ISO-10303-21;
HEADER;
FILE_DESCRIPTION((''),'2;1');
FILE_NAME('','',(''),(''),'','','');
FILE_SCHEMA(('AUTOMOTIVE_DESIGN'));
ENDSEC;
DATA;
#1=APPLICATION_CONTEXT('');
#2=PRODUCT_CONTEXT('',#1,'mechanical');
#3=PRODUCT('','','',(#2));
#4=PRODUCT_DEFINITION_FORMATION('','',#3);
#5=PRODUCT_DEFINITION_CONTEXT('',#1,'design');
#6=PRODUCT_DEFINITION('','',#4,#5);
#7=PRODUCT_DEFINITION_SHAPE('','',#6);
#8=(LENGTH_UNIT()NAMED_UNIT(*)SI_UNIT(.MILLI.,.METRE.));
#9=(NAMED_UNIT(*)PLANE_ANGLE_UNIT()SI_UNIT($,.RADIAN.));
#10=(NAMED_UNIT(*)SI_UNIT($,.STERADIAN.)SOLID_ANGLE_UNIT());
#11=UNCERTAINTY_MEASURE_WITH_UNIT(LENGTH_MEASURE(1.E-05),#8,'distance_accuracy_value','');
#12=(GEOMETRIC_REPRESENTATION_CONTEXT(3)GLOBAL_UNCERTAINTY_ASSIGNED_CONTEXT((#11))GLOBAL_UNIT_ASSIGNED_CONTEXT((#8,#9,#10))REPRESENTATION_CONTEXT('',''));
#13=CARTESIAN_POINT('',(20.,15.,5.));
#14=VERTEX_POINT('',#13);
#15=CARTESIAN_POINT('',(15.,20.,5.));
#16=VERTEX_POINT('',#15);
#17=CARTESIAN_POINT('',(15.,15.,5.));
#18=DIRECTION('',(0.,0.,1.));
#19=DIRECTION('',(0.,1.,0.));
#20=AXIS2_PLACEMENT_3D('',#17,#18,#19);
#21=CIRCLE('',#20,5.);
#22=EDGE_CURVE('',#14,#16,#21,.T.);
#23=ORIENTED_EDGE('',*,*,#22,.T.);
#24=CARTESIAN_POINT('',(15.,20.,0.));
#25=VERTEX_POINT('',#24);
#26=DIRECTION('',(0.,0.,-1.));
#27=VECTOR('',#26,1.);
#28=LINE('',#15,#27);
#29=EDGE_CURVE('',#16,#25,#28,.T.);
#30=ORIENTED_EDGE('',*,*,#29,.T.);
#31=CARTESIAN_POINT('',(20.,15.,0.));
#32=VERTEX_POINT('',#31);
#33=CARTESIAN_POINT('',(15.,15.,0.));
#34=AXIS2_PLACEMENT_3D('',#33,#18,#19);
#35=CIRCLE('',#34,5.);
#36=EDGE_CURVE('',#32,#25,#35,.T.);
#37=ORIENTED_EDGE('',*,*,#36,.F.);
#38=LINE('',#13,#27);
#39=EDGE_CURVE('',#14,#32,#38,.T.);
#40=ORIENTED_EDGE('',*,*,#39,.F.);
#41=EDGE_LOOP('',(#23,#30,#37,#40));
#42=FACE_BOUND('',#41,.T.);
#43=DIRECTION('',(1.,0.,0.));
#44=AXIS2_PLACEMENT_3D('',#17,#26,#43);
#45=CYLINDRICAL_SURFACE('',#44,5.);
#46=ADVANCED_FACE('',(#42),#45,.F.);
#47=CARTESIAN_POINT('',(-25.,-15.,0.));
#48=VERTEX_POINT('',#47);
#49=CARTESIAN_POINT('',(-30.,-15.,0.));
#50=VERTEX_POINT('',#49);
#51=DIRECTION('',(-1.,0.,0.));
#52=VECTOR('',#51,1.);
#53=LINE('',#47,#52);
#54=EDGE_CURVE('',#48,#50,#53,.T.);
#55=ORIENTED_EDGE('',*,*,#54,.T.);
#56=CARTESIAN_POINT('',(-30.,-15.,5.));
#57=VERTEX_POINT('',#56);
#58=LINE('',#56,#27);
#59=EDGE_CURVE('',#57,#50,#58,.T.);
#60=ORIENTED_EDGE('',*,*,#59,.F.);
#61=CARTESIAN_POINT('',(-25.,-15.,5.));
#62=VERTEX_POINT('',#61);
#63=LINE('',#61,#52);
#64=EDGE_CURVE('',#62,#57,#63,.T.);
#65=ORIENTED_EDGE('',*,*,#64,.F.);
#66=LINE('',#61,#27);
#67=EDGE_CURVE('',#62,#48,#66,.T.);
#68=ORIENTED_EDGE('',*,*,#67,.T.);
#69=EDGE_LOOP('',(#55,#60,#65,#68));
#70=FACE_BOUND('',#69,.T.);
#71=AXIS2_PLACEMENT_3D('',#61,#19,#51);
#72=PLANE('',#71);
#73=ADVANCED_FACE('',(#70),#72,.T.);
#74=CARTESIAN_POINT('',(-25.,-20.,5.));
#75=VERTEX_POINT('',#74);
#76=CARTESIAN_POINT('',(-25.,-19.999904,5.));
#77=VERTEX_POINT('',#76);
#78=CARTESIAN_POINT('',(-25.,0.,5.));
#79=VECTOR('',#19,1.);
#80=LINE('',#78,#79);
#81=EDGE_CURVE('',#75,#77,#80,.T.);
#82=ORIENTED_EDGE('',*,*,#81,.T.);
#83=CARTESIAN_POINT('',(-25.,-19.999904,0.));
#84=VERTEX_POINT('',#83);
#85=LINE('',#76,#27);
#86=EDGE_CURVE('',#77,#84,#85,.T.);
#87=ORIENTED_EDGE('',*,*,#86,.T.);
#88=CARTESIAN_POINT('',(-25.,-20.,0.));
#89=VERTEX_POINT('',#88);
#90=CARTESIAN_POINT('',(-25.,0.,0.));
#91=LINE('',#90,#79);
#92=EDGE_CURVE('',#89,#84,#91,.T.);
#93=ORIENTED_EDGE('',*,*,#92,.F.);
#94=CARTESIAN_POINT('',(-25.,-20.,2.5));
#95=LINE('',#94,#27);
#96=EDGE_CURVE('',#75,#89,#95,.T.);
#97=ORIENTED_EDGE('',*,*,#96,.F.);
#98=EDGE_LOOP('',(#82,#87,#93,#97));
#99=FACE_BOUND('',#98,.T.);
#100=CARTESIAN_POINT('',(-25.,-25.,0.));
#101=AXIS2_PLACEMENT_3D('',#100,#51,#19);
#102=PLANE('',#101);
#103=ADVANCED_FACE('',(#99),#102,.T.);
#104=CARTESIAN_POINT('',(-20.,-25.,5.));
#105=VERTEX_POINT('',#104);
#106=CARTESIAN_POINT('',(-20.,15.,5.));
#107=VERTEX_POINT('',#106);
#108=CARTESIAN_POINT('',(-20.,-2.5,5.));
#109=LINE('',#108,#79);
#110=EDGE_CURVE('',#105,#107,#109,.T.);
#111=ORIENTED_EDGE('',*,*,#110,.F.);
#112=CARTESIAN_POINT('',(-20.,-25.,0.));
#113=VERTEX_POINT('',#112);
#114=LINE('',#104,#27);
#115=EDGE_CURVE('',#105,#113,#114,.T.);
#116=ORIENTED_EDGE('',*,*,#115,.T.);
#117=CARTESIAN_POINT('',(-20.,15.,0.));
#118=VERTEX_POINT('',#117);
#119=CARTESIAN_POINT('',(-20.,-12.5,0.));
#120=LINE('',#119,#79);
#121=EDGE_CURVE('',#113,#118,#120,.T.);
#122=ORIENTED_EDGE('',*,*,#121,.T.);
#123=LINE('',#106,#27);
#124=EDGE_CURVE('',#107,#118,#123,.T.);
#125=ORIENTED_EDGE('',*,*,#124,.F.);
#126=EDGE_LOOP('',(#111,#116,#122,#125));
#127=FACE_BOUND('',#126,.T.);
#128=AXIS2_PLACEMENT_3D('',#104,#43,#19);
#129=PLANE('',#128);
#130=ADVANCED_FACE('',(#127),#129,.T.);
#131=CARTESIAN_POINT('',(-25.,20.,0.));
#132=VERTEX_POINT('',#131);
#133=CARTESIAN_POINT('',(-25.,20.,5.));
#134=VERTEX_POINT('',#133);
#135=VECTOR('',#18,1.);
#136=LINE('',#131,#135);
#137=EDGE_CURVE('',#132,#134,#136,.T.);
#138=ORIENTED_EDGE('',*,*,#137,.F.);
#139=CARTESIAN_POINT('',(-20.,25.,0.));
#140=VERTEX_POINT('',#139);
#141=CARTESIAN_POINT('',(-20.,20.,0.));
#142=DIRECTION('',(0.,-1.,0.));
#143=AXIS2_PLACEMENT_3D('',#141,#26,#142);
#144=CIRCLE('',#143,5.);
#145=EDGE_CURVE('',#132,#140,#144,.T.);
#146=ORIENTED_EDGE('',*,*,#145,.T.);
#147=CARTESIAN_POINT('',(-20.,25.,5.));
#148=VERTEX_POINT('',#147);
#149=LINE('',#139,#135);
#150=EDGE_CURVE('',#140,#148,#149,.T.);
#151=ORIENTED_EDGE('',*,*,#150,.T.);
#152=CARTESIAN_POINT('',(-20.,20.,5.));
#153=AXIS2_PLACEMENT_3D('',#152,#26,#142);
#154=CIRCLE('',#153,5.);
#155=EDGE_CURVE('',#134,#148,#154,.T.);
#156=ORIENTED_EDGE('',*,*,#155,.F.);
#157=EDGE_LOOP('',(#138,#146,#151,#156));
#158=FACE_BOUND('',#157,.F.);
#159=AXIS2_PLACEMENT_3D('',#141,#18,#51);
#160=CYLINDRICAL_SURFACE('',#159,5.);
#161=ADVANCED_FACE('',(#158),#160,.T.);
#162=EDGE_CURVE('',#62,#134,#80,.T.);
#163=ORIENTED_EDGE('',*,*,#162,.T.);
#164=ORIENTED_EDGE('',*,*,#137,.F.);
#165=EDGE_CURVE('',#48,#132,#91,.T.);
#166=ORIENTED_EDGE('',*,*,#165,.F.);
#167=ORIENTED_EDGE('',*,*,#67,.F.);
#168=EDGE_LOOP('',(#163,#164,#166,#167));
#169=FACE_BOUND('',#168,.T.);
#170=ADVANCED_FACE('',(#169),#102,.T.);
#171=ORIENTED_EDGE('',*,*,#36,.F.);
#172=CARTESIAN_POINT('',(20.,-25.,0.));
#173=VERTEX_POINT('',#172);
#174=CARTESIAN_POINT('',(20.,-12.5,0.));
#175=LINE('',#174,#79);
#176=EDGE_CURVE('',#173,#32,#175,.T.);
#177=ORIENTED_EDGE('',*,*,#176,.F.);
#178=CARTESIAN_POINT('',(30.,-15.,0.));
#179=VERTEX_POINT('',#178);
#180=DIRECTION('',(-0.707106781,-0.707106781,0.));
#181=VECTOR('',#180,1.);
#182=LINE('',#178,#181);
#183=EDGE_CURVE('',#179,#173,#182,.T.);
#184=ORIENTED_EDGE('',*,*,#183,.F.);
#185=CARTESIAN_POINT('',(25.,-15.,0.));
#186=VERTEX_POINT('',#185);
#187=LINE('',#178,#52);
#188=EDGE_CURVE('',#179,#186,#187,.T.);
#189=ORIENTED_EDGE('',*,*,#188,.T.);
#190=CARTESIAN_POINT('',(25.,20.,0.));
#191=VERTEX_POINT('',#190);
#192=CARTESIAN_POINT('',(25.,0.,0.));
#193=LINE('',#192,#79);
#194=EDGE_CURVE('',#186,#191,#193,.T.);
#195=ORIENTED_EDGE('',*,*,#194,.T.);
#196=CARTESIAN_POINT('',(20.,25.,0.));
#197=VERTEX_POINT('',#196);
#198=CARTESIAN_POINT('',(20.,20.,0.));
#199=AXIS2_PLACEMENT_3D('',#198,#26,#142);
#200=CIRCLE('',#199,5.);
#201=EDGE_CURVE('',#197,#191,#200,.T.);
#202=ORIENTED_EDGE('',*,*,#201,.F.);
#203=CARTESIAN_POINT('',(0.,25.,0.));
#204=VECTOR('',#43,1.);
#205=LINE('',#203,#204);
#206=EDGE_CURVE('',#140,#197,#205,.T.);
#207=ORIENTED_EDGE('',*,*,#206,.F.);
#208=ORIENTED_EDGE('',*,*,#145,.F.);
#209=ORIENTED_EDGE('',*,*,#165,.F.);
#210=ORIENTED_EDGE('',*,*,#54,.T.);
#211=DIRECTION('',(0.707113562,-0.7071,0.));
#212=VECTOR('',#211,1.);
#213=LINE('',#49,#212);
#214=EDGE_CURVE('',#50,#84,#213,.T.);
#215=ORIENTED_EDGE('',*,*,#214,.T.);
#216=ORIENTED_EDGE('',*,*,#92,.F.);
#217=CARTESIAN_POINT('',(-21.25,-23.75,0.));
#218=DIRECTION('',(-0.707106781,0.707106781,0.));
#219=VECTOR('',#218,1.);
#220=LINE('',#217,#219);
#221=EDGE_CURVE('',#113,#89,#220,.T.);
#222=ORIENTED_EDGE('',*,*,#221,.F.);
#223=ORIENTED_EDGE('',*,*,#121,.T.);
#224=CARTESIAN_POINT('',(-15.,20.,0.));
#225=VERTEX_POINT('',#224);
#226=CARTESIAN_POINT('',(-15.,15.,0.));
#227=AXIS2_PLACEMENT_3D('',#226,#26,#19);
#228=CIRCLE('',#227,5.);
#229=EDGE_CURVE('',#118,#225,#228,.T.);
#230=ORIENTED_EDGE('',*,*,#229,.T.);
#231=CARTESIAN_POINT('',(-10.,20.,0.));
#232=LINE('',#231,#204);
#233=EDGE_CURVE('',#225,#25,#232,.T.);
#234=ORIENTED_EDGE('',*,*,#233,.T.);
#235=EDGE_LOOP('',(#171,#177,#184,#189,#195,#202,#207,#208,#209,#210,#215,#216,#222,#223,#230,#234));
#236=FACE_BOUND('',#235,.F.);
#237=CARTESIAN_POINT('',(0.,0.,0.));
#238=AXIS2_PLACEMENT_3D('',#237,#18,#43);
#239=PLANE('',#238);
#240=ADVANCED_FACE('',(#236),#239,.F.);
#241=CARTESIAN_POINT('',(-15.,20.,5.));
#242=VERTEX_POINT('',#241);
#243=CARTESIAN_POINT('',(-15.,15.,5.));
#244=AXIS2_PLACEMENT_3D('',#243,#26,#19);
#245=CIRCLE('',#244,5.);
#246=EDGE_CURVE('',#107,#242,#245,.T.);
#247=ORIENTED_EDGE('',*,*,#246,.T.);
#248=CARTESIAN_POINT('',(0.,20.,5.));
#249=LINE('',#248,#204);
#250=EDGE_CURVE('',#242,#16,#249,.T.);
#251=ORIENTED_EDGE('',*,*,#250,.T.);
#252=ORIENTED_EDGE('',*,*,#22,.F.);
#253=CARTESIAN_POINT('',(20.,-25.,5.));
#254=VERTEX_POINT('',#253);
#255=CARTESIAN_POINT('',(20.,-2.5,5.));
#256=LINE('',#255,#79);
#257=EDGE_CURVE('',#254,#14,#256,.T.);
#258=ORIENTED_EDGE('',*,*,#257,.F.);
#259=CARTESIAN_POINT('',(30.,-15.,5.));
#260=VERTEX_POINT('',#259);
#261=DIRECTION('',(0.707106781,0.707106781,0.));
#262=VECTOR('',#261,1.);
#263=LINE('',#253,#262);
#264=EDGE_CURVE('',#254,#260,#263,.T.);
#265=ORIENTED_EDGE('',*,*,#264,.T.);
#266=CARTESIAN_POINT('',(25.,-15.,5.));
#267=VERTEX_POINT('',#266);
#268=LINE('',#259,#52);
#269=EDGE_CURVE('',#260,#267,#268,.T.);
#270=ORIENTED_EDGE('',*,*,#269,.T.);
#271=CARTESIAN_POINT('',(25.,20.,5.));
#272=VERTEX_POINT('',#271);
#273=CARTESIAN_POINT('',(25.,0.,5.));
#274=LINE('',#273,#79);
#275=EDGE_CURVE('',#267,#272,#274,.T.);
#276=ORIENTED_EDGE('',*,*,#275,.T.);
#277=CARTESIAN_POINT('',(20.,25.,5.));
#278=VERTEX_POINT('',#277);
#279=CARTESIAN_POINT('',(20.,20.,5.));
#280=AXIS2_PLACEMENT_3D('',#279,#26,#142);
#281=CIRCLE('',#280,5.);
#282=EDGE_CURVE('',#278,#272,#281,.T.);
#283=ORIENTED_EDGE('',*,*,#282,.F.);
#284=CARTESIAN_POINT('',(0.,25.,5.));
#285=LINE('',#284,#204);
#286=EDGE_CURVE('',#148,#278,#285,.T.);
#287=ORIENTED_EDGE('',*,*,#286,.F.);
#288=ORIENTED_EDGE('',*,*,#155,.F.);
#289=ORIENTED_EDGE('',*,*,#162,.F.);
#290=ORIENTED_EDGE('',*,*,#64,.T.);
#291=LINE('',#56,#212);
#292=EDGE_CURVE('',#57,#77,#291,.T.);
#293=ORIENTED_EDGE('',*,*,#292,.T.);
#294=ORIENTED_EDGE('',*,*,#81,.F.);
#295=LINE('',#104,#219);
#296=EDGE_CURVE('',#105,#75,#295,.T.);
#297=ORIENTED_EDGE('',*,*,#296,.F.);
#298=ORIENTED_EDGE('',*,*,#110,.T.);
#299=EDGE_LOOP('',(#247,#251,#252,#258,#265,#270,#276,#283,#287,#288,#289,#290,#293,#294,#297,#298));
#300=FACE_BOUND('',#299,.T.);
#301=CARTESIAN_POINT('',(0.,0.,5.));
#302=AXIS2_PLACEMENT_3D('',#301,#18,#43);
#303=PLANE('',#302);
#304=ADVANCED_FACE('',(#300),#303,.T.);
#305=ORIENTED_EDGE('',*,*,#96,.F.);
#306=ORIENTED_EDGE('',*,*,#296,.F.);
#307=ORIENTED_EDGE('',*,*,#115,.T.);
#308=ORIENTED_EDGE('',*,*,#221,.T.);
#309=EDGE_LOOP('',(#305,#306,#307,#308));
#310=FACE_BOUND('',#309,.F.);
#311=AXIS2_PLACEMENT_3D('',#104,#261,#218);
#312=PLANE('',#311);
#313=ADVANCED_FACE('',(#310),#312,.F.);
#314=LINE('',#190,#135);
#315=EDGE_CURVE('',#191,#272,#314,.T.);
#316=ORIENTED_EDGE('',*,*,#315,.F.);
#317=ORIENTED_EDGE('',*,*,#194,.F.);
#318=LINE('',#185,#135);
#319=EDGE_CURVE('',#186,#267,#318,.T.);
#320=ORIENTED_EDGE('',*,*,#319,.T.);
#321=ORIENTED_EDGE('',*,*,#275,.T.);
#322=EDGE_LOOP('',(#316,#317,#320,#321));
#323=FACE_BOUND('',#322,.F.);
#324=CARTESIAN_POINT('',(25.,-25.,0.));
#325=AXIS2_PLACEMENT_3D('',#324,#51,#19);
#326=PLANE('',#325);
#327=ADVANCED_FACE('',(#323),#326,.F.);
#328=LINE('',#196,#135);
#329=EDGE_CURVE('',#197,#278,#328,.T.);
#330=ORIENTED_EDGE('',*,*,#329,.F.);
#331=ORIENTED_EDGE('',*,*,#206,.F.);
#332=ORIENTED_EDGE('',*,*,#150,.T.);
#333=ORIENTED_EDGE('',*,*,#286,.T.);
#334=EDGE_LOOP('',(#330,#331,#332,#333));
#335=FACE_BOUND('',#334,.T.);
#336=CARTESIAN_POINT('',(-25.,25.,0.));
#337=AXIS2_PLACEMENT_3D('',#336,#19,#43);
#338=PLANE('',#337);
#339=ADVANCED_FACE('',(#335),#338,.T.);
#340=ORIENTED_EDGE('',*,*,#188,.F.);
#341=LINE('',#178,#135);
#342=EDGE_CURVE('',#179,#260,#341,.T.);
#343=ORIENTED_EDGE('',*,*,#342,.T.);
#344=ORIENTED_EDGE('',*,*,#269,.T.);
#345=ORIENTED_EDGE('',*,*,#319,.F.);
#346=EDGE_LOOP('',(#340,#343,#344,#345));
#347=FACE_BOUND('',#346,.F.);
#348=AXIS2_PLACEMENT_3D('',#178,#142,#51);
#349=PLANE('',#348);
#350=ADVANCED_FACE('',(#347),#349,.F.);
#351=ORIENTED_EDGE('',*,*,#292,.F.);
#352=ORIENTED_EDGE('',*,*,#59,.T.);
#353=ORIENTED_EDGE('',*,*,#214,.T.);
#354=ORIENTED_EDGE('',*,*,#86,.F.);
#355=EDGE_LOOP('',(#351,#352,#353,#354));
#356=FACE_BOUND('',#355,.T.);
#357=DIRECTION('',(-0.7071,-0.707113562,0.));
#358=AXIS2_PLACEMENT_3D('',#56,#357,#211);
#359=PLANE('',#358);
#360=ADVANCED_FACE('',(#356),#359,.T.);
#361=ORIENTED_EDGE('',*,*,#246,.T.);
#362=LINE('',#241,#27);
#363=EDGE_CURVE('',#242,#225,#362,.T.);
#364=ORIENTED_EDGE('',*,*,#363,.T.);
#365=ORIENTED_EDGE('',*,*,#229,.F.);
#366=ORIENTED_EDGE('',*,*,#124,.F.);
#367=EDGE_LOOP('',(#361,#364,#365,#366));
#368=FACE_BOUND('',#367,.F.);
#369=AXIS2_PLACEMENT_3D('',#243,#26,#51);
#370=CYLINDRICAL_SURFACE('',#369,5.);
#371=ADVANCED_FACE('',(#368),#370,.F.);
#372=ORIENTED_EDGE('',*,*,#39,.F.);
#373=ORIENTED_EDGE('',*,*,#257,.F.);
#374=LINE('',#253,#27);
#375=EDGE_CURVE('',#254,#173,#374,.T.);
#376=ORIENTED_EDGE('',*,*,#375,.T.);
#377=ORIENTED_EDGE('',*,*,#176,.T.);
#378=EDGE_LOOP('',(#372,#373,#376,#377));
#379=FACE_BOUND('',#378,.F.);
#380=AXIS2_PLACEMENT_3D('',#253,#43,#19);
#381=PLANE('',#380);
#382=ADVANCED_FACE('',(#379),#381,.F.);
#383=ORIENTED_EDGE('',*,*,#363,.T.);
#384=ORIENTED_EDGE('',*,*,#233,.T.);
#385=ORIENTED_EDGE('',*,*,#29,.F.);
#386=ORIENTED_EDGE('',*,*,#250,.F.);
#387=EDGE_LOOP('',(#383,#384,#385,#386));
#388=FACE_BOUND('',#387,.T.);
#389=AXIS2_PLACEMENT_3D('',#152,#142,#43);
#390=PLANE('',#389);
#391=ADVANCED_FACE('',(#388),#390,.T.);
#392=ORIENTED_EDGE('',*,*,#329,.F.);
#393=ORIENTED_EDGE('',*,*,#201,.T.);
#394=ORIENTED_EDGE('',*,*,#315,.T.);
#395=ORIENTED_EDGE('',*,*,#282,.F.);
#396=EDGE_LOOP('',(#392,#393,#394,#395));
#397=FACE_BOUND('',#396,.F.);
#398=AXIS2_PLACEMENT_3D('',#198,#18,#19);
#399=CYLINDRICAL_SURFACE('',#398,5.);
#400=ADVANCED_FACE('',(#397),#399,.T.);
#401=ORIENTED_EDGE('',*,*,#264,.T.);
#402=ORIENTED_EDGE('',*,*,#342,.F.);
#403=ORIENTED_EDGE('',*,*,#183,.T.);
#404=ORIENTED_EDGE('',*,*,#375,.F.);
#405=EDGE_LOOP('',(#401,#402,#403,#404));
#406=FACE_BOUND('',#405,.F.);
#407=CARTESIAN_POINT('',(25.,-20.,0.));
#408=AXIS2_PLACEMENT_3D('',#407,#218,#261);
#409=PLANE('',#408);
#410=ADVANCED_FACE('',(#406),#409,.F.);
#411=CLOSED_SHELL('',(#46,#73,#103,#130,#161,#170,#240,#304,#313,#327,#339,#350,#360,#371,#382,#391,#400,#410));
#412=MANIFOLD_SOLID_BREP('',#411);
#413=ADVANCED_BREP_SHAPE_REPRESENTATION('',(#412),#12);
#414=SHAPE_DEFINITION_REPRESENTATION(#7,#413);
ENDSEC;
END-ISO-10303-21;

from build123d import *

# Parameters (mm, degrees)
F0_W      = 50
F0_H      = 50
F1_DEPTH  = 5
F2_W      = 40
F2_H      = 45
F3_DEPTH  = 5.001
F4_R      = 5
F6_DEPTH  = 5
F8_DEPTH  = 5.001
F10_DEPTH = 5
F12_DEPTH = 5.001


# Not quite as in the source:
# - ends of sketch curves that miss each other by under 0.0002 mm in the source are joined


with BuildPart() as f1:
    # F0 (on Top) → F1 (new body)
    with BuildSketch(Plane.XY):
        Rectangle(F0_W, F0_H)
    extrude(amount=F1_DEPTH)

    # F2 (on face) → F3 (cut, through all)
    with BuildSketch(Plane.XY.offset(5)):
        with Locations((0, -2.5)):
            Rectangle(F2_W, F2_H)
    extrude(amount=-F3_DEPTH, mode=Mode.SUBTRACT)

    # F4
    f4_edges = [f1.edges().sort_by_distance(p)[0] for p in [
        (-20, 20, 2.5),
        (20, 20, 2.5),
        (25, 25, 2.5),
        (-25, 25, 2.5),
    ]]
    fillet(f4_edges, radius=F4_R)

    # F5 (on face) → F6 (join)
    with BuildSketch(Plane.XY.offset(5)):
        Polygon((-25, -19.9999040991), (-25, -15), (-30, -15), align=None)
    extrude(amount=-F6_DEPTH)

    # F7 (on face) → F8 (cut, through all)
    with BuildSketch(Plane.XY.offset(5)):
        Polygon((-20, -25), (-25.0000479505, -19.9999520495), (-25, -25), align=None)
    extrude(amount=-F8_DEPTH, mode=Mode.SUBTRACT)

    # F9 (on Top) → F10 (join)
    with BuildSketch(Plane.XY):
        Polygon((30, -15), (25, -15), (25, -20), align=None)
    extrude(amount=F10_DEPTH)

    # F11 (on face) → F12 (cut, through all)
    with BuildSketch(Plane.XY.offset(5)):
        Polygon((25, -25), (25, -20), (20, -25), align=None)
    extrude(amount=-F12_DEPTH, mode=Mode.SUBTRACT)


solid = f1.part
